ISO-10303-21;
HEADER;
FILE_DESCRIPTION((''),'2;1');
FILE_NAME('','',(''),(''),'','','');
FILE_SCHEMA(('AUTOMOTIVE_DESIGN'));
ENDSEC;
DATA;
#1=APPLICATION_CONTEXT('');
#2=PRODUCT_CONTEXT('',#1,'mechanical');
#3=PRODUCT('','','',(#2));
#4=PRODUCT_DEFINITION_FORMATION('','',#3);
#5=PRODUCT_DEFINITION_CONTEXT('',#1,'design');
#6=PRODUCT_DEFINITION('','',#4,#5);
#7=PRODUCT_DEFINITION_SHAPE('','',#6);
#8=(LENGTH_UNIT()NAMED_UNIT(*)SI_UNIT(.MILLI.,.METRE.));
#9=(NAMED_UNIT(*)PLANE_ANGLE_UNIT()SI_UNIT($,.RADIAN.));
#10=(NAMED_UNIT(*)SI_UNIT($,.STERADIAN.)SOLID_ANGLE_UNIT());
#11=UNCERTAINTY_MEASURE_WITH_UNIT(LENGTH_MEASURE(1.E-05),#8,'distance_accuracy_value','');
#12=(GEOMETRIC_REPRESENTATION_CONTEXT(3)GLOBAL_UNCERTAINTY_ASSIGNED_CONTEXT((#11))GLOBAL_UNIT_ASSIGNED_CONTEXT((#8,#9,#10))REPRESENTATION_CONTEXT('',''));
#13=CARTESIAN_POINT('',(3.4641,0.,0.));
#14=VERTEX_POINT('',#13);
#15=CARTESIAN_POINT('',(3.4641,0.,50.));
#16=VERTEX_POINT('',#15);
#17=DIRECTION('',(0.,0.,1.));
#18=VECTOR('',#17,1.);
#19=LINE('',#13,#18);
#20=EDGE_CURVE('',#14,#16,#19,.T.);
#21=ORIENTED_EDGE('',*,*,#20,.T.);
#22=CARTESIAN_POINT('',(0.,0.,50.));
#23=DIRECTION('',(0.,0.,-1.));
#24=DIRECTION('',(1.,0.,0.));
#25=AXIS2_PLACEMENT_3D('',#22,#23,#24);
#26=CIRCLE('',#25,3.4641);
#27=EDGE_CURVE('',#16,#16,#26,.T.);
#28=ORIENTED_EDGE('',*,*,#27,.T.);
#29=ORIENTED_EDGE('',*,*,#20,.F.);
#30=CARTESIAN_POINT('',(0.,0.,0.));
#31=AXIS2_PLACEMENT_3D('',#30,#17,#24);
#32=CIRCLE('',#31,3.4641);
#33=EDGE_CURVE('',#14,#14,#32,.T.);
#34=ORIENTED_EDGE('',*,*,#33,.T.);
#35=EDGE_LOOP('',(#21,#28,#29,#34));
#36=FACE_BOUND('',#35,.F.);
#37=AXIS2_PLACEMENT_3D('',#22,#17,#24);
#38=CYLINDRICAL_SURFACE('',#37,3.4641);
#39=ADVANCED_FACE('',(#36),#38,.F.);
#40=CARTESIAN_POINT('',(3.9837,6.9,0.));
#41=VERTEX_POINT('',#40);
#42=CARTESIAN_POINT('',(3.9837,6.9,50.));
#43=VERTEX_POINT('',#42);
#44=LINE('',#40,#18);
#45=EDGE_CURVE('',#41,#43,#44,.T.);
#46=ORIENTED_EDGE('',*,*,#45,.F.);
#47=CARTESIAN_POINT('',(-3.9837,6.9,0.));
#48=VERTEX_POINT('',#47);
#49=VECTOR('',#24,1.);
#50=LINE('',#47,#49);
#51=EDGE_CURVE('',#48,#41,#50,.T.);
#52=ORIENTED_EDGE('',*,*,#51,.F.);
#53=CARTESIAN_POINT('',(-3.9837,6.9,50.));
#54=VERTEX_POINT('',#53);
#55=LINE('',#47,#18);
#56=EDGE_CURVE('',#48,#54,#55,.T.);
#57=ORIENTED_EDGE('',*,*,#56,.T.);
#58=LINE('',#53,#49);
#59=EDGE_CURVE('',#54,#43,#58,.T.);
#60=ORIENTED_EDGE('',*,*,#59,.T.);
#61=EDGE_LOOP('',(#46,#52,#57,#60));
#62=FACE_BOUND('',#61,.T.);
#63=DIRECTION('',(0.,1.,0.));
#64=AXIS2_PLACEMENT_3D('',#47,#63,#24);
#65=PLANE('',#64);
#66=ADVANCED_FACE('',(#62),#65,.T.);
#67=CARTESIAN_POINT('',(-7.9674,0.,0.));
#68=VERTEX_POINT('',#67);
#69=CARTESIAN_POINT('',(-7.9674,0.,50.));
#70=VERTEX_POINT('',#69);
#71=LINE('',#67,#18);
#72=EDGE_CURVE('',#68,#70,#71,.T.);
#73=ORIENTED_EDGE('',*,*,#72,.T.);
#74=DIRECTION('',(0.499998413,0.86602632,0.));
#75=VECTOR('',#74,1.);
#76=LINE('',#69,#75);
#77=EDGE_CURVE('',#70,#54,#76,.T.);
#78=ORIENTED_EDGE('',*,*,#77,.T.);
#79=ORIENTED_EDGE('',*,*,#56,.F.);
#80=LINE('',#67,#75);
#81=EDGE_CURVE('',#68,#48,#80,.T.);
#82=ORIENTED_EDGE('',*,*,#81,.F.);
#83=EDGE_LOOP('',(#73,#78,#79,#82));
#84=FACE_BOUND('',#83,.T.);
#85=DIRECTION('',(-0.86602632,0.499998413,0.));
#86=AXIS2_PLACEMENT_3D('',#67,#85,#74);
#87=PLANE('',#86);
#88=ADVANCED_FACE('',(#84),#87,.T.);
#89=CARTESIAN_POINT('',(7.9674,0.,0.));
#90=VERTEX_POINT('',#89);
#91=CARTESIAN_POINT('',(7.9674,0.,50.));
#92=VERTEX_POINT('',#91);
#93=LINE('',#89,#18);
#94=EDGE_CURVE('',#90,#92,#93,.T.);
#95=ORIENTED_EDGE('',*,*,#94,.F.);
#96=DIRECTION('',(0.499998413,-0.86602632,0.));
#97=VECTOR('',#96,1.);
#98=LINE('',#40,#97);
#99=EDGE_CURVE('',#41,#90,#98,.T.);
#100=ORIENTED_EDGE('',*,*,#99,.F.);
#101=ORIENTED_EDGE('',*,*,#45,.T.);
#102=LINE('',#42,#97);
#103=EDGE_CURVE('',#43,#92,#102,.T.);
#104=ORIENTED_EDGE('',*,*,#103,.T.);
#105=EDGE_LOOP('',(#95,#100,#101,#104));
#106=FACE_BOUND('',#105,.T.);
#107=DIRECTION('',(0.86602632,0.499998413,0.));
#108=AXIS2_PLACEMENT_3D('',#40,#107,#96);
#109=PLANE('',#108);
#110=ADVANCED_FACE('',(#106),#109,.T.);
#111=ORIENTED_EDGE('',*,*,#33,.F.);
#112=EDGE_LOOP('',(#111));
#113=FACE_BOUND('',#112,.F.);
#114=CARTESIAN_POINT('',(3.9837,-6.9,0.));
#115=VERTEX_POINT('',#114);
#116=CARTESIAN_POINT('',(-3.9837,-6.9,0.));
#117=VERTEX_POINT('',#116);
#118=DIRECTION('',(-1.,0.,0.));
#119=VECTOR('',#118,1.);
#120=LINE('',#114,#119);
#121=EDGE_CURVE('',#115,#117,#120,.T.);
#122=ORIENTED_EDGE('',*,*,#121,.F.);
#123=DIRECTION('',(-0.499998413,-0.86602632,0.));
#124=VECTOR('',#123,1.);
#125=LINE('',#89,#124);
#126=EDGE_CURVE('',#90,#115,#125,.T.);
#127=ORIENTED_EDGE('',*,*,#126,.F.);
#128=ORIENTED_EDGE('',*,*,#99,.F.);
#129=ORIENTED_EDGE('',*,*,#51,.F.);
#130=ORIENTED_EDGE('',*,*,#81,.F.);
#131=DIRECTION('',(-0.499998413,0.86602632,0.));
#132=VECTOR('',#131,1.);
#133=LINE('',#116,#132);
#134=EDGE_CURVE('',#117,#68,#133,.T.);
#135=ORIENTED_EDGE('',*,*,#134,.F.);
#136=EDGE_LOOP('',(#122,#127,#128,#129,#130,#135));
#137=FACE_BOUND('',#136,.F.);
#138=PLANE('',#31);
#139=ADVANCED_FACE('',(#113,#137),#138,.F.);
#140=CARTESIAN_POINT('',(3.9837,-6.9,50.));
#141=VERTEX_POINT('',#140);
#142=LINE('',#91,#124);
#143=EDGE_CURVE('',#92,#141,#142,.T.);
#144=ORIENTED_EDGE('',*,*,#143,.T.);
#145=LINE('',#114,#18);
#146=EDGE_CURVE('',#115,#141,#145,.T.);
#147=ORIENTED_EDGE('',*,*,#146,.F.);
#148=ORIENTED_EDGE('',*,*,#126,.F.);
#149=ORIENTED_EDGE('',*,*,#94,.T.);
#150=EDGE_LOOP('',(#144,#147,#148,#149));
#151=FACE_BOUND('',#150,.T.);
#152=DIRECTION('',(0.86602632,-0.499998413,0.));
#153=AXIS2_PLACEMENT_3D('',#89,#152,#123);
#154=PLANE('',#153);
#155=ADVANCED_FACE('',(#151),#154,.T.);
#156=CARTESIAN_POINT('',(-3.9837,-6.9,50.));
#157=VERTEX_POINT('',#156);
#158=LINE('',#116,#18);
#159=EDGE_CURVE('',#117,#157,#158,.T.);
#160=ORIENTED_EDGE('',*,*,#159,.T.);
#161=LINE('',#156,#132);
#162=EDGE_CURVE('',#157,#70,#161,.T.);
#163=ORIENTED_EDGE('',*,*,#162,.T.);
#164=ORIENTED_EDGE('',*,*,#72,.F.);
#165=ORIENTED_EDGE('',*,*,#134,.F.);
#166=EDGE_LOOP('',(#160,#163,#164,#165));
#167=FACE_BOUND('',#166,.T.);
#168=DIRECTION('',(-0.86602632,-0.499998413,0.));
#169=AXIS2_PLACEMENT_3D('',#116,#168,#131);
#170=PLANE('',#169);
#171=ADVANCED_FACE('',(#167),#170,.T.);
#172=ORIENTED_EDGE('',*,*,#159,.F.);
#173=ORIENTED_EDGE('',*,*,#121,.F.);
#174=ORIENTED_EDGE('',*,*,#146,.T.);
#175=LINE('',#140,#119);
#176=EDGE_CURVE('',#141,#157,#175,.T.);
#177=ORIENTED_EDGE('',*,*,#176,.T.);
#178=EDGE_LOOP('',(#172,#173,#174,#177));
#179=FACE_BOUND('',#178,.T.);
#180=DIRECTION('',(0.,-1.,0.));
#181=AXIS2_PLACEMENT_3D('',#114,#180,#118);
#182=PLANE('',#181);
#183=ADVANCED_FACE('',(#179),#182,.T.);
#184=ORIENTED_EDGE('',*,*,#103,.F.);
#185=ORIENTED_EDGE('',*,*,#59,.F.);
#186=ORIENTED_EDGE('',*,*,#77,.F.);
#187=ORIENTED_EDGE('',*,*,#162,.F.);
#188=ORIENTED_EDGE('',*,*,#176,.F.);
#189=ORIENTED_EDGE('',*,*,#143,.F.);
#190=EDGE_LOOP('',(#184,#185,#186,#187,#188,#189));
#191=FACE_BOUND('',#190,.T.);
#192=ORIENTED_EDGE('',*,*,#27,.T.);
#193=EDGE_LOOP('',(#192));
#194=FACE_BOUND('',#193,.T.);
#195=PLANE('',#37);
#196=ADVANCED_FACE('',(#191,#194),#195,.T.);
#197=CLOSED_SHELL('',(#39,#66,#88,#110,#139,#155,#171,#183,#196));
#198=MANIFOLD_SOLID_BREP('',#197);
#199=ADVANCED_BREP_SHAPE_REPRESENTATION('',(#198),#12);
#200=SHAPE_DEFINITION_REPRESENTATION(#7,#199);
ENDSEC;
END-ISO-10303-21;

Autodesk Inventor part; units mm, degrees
ref_plane "YZ Plane" through (0, 0, 0) normal (1, 0, 0) x (0, 1, 0)
ref_plane "XZ Plane" through (0, 0, 0) normal (0, 1, 0) x (-1, 0, 0)
ref_plane "XY Plane" through (0, 0, 0) normal (0, 0, 1) x (1, 0, 0)
sketch "Sketch1" plane through (0, 0, 0) normal (0, 0, 1) x (1, 0, 0)
  line L0 (7.9674, 0) -> (3.9837, -6.9)
  line L1 (3.9837, -6.9) -> (-3.9837, -6.9)
  line L2 (-3.9837, -6.9) -> (-7.9674, 0)
  line L3 (-7.9674, 0) -> (-3.9837, 6.9)
  line L4 (-3.9837, 6.9) -> (3.9837, 6.9)
  line L5 (3.9837, 6.9) -> (7.9674, 0)
  line L6 (3.4641, 0) -> (1.7321, -3)
  line L7 (1.7321, -3) -> (-1.7321, -3)
  line L8 (-1.7321, -3) -> (-3.4641, 0)
  line L9 (-3.4641, 0) -> (-1.7321, 3)
  line L10 (-1.7321, 3) -> (1.7321, 3)
  line L11 (1.7321, 3) -> (3.4641, 0)
  point P0 (0, 0)
  point P1 (0, 0)
  point P2 (0, 0)
  dimension "d0" = 13.8
  dimension "d1" = 6
extrude "Extrusion1" add sketch "Sketch1" along normal blind 50
sketch "Sketch2" plane through (0, 0, 50) normal (0, 0, 1) x (1, 0, 0)
  line L0 (1.7321, -3) -> (-1.7321, -3) projected
  circle A0 centre (0, 0) radius 3.4641
extrude "Extrusion2" cut sketch "Sketch2" against normal blind 50
properties part number "Montaje Manguera"
